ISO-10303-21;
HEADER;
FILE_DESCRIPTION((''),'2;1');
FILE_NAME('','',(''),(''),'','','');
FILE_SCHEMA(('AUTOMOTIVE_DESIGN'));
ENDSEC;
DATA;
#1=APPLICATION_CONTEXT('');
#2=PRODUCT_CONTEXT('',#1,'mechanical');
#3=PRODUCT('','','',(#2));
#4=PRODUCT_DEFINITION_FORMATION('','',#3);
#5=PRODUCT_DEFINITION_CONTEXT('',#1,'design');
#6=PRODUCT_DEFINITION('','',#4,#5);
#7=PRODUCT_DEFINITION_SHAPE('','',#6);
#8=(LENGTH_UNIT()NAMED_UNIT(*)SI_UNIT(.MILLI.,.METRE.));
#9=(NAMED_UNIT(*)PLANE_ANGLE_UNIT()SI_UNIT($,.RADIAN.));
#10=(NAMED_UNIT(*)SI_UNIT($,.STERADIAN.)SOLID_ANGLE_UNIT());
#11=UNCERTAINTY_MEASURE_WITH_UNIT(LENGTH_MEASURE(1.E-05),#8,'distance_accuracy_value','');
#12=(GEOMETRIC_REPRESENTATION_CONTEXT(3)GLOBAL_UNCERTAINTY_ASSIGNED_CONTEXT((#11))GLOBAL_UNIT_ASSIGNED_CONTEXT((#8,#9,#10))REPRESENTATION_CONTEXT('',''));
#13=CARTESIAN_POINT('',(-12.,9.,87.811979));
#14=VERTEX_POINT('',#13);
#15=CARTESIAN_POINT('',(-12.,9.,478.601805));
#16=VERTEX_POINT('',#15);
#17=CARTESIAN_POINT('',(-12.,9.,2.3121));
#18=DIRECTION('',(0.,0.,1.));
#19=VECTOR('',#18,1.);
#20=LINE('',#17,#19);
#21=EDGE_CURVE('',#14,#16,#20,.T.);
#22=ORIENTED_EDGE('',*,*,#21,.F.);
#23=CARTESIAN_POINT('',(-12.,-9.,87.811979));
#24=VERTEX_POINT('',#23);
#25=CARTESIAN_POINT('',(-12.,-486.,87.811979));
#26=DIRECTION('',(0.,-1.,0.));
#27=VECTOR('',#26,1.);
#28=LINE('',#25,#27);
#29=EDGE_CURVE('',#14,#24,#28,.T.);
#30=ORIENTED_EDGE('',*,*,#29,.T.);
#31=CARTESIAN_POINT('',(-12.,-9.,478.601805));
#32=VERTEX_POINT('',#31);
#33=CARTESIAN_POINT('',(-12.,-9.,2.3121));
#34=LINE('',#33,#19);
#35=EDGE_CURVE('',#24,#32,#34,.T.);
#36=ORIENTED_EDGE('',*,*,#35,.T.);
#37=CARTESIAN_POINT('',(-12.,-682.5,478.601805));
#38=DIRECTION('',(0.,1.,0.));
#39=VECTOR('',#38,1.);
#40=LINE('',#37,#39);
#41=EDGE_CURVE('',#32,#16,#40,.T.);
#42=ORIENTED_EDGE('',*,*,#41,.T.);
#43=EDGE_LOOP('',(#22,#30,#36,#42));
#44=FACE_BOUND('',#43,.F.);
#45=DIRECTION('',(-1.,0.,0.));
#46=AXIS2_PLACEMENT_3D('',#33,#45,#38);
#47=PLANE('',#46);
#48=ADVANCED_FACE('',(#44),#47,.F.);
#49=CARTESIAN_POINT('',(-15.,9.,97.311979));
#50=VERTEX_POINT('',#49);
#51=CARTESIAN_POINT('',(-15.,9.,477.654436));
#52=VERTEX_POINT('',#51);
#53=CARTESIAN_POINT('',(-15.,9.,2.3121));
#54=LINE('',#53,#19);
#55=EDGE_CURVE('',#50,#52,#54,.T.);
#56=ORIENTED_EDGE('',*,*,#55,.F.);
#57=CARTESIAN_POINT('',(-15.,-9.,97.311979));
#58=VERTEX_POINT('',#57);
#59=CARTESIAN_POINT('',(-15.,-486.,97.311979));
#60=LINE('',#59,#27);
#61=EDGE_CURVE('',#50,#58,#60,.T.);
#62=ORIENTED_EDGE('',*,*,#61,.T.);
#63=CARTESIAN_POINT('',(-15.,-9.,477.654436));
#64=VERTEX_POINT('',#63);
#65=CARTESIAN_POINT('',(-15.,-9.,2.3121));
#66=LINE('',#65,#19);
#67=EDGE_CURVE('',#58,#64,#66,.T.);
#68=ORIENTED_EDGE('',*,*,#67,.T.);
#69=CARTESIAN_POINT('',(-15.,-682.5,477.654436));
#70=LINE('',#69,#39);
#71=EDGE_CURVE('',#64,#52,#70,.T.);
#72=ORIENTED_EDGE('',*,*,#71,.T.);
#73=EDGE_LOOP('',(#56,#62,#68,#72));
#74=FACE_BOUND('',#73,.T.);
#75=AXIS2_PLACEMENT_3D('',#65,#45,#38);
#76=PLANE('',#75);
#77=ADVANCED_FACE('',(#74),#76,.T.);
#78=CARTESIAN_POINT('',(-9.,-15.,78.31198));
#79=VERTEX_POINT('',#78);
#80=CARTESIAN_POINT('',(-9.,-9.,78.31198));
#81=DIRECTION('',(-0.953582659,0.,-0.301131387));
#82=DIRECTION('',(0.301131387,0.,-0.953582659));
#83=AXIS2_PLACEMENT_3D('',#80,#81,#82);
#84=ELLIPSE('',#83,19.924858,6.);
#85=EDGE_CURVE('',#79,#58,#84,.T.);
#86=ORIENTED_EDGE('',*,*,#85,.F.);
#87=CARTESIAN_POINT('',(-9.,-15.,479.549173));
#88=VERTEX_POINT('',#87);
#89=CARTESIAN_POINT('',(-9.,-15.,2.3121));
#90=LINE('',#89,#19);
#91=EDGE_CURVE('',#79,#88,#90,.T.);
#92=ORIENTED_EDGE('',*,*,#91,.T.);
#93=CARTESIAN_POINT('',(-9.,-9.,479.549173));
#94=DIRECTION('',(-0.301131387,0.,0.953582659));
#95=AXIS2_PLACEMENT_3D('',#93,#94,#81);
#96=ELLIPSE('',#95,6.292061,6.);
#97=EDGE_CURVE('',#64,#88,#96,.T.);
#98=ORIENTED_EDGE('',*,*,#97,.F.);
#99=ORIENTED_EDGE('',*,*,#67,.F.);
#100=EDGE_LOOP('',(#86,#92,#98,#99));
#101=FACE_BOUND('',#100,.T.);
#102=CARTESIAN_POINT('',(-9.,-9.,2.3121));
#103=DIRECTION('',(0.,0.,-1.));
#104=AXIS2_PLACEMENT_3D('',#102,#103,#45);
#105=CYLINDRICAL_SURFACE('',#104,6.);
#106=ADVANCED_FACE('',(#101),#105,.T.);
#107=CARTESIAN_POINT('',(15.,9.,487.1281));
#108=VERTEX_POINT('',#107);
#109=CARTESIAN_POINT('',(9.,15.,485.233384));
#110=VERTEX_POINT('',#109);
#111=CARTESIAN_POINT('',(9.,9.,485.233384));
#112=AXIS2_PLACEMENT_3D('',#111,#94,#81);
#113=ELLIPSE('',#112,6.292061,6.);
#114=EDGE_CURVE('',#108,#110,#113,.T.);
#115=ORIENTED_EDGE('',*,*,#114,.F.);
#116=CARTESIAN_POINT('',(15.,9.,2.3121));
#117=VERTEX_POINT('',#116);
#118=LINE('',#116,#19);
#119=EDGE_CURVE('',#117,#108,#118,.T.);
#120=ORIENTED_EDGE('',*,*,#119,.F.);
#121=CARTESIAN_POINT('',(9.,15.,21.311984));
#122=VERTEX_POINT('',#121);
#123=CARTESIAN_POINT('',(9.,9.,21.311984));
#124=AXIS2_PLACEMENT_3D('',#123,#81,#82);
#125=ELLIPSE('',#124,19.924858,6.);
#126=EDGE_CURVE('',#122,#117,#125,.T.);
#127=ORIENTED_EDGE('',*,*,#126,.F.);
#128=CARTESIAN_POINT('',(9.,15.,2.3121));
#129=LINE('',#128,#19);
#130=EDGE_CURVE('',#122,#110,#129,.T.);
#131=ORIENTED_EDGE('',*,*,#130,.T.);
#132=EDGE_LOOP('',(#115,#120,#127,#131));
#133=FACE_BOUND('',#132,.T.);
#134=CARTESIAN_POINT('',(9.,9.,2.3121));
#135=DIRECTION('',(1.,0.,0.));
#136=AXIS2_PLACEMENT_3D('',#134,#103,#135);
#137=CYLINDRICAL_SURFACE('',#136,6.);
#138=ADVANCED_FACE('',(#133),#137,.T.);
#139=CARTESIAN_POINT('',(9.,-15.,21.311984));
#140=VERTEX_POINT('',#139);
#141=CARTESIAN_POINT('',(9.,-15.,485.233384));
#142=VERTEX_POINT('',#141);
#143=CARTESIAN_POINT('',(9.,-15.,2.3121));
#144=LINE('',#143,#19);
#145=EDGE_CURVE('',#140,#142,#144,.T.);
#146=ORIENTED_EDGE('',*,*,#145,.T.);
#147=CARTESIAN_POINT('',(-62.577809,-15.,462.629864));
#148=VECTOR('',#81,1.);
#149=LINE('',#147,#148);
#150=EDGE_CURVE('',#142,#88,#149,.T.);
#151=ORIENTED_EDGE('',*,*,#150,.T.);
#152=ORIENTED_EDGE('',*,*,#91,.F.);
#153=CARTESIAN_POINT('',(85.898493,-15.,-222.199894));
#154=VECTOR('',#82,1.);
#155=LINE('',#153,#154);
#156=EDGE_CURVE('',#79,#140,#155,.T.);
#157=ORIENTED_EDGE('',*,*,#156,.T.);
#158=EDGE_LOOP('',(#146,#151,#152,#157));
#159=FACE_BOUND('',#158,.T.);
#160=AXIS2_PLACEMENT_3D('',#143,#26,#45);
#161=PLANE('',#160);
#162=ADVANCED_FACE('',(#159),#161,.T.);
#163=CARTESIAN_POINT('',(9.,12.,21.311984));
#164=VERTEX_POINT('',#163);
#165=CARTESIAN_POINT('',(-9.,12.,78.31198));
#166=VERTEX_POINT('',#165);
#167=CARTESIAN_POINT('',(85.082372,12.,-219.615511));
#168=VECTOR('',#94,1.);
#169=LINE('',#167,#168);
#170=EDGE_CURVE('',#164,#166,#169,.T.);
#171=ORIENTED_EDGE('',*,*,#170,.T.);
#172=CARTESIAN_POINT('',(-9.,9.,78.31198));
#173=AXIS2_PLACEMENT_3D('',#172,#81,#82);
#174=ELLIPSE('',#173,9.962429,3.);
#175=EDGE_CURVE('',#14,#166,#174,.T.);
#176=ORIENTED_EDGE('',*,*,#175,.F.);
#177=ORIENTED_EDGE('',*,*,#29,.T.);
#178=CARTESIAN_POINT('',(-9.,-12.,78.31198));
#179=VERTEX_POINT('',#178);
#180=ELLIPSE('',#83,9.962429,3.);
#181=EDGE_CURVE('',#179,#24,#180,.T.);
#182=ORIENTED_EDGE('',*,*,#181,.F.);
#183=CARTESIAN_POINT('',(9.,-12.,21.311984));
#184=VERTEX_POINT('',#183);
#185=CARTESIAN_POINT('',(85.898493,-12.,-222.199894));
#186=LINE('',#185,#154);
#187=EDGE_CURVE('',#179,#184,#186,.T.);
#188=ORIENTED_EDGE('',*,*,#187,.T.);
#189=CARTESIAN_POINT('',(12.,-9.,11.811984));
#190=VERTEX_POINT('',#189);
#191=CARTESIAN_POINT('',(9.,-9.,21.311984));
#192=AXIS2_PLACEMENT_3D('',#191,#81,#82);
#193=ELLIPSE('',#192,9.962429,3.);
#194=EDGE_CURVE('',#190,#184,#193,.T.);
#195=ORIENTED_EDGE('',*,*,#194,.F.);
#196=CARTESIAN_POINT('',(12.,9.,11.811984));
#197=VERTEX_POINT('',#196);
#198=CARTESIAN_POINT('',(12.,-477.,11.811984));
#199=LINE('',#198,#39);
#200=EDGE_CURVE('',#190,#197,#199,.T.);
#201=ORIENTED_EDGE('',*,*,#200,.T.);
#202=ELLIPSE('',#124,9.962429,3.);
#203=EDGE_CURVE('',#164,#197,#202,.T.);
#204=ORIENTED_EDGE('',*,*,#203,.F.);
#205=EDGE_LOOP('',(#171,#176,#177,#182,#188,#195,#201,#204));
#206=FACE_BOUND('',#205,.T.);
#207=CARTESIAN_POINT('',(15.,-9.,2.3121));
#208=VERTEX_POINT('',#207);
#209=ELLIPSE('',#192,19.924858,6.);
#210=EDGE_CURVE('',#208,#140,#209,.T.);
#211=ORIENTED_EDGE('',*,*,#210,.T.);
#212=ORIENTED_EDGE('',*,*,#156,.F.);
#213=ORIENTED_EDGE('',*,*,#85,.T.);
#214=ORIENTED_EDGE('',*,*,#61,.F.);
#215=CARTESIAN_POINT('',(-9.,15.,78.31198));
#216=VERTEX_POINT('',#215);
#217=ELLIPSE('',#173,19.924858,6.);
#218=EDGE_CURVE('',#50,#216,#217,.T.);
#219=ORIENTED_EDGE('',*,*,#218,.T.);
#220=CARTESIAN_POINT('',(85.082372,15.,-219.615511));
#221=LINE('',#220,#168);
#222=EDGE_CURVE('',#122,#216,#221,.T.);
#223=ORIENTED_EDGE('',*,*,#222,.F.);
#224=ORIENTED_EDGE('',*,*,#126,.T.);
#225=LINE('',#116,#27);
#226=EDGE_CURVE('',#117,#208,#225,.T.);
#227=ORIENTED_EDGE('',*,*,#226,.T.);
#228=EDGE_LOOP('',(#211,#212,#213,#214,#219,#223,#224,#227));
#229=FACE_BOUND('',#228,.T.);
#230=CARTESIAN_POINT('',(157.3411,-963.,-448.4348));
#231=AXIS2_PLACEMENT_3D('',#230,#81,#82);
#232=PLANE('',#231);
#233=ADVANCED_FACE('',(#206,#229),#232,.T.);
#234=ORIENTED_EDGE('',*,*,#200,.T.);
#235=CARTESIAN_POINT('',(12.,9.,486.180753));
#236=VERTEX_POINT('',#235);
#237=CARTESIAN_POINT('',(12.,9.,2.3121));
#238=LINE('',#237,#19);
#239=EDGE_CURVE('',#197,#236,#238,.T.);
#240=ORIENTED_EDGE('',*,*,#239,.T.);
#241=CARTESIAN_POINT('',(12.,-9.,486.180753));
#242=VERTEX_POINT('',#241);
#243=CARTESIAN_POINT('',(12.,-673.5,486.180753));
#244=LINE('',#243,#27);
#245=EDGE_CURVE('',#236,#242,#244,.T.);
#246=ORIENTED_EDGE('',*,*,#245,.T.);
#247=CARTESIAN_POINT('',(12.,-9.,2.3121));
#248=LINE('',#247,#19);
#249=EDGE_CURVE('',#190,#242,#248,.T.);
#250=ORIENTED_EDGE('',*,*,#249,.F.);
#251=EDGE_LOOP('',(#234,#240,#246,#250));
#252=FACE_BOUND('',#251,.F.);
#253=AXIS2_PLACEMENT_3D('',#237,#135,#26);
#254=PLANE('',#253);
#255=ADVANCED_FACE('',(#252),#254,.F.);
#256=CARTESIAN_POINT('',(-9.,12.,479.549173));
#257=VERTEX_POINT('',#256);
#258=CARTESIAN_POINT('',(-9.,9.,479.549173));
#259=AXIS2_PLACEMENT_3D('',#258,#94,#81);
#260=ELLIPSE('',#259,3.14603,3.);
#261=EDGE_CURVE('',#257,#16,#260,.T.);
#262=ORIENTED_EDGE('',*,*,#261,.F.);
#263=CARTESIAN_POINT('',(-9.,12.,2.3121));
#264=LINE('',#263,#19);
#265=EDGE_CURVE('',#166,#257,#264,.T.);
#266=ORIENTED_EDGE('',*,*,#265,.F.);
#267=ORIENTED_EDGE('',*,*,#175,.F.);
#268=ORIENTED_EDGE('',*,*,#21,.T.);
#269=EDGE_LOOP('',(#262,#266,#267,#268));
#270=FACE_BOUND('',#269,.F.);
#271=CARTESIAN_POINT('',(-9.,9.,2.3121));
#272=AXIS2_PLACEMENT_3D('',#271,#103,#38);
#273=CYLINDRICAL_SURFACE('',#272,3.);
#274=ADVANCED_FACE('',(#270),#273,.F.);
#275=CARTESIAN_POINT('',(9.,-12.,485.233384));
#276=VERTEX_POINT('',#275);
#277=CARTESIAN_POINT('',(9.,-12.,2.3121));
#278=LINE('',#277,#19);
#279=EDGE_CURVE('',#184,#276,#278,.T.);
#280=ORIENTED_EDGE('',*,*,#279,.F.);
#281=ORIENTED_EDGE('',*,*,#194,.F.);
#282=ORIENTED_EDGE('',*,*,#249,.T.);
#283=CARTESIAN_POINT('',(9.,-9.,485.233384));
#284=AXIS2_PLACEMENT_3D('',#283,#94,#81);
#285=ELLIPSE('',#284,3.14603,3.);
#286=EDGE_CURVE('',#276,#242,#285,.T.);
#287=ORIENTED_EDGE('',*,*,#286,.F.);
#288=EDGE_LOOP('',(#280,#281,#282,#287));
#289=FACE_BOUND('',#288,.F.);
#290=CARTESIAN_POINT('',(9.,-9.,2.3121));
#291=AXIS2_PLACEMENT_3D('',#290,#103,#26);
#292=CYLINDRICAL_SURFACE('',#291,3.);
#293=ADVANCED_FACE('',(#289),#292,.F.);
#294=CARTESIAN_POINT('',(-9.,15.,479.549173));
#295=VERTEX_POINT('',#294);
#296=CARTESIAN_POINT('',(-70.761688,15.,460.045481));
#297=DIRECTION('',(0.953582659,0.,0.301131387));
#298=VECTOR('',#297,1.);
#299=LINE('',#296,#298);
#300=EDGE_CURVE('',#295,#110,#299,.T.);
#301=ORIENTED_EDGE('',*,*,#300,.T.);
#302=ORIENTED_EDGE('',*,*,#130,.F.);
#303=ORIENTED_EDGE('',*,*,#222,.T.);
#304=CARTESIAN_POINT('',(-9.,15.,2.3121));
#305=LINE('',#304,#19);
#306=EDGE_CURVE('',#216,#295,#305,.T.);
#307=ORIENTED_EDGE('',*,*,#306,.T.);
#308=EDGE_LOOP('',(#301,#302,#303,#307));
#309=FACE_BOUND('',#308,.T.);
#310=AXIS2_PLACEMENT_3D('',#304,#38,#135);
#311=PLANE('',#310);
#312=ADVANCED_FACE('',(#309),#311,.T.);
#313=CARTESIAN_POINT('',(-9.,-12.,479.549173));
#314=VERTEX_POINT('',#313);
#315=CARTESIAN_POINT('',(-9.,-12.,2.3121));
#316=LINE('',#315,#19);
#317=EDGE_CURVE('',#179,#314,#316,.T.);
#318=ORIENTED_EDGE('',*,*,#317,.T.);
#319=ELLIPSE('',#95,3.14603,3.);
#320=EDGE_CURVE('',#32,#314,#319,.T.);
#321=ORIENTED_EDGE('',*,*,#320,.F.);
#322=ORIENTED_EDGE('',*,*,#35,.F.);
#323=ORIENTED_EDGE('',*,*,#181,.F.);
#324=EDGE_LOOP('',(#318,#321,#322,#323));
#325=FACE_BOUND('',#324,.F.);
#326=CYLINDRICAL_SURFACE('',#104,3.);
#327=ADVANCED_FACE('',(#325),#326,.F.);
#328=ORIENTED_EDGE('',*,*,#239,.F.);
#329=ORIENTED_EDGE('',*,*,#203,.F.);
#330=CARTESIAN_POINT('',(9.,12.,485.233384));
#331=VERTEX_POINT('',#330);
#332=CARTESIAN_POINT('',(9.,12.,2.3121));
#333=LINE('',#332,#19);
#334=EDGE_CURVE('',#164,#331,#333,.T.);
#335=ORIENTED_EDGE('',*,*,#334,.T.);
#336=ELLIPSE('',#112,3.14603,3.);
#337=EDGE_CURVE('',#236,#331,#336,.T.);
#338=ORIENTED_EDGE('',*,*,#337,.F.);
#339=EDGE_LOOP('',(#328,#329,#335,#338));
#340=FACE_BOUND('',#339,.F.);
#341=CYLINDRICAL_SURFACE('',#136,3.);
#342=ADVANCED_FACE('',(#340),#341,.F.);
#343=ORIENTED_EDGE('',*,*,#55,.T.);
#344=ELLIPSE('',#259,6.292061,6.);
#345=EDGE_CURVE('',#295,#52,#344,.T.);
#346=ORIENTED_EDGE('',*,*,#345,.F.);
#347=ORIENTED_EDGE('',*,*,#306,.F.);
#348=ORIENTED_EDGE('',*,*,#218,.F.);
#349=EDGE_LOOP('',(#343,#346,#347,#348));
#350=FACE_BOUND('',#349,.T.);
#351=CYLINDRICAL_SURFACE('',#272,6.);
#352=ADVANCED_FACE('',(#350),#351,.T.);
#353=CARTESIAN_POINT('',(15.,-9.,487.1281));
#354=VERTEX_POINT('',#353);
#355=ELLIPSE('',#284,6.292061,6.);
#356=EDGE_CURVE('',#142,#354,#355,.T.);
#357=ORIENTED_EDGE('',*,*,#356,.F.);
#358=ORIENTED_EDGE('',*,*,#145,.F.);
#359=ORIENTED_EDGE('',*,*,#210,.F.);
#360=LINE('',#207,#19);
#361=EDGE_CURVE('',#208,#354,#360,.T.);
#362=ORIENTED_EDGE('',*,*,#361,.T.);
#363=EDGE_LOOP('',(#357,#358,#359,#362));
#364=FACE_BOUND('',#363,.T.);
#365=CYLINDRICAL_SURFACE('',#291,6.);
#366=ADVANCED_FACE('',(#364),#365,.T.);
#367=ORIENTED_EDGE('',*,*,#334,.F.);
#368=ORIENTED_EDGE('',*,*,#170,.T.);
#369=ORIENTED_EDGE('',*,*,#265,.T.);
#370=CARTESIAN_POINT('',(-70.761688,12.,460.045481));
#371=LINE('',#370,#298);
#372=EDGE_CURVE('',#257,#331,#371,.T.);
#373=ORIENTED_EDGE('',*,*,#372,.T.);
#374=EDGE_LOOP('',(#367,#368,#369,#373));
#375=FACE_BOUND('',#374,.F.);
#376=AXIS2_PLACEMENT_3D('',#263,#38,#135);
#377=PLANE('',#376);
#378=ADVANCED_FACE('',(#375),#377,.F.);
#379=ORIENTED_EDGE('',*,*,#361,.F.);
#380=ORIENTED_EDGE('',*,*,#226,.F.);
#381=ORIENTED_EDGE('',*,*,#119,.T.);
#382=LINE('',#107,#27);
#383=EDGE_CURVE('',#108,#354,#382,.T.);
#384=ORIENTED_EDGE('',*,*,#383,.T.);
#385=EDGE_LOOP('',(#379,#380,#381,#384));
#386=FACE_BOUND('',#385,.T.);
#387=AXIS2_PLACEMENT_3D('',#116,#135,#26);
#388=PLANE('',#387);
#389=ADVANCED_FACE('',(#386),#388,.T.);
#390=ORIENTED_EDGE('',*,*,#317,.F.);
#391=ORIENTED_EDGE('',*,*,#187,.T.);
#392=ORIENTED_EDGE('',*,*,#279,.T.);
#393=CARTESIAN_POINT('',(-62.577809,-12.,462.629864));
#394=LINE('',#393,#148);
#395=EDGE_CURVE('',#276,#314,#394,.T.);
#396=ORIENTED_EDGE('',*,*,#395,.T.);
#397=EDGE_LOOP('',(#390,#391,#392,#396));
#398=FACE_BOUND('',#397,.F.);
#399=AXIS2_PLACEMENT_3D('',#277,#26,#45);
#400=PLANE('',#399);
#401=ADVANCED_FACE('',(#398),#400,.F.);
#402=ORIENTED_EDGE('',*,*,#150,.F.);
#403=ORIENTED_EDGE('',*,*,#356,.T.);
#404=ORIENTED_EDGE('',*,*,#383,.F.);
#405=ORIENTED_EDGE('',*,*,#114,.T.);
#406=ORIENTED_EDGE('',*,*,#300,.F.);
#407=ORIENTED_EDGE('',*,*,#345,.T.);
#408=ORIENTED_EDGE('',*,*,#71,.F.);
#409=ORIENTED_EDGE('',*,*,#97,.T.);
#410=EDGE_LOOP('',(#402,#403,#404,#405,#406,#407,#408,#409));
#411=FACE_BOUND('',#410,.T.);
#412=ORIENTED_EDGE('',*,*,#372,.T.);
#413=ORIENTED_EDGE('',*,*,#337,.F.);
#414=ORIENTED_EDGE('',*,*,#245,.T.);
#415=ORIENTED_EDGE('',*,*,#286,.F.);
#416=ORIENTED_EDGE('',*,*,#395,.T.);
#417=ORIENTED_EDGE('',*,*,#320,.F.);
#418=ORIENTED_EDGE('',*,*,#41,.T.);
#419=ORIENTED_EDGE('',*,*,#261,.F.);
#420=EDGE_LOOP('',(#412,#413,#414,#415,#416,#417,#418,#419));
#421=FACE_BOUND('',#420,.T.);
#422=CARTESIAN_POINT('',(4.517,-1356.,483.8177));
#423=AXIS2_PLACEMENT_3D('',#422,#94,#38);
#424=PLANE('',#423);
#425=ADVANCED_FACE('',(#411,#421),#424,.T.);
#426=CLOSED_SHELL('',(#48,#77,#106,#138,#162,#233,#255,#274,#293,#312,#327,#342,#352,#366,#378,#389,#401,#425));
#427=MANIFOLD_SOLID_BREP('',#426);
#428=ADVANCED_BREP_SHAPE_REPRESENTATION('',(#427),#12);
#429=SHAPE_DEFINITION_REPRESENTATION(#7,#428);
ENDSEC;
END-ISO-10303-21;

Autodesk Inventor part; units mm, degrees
ref_plane "Start Plane" through (0, 0, 2.3121) normal (0, 0, 1) x (1, 0, 0)
ref_plane "End Plane" through (0, 0, 487.1282) normal (0, 0, 1) x (1, 0, 0)
sketch "Sketch" plane through (0, 0, 0) normal (0, 0, 1) x (1, 0, 0)
  line L0 (-15, -9) -> (-15, 9)
  line L1 (-9, 15) -> (9, 15)
  line L2 (15, 9) -> (15, -9)
  line L3 (9, -15) -> (-9, -15)
  arc A0 (-15, -9) -> (-9, -15) centre (-9, -9) ccw
  arc A1 (-9, 15) -> (-15, 9) centre (-9, 9) ccw
  arc A2 (15, 9) -> (9, 15) centre (9, 9) ccw
  arc A3 (9, -15) -> (15, -9) centre (9, -9) ccw
  arc A4 (-9, 12) -> (-12, 9) centre (-9, 9) ccw
  line L4 (-9, 12) -> (9, 12)
  arc A5 (12, 9) -> (9, 12) centre (9, 9) ccw
  line L5 (12, 9) -> (12, -9)
  arc A6 (9, -12) -> (12, -9) centre (9, -9) ccw
  line L6 (9, -12) -> (-9, -12)
  arc A7 (-12, -9) -> (-9, -12) centre (-9, -9) ccw
  line L7 (-12, -9) -> (-12, 9)
  line L8 (0, 22.7397) -> (0, -22.7397) construction
  line L9 (-22.7397, 0) -> (22.7397, 0) construction
  dimension "d7" = 6
  dimension "d10" = 30
  dimension "d11" = 30
  dimension "d12" = 3
  dimension "d15" = 15
  dimension "d16" = 15
extrude "Body" add sketch "Sketch" along normal up to surface (484.816 mm away) from surface at 2.3121
sketch "Sketch3" plane through (0, 0, 0) normal (0, 0, 1) x (1, 0, 0)
  line L0 (0, 0) -> (10, 0)
ref_plane "Work Plane3" through (0, 0, 0) normal (0, -1, 0) x (1, 0, 0)
ref_plane "Work Plane4" through (4.517, -1356, 483.8177) normal (-0.3011314, 0, 0.9535827) x (0.9535827, 0, 0.3011314)
split "Split1" plane through (4.517, -1356, 483.8177) removes the side toward (-0.3011314, 0, 0.9535827)
ref_plane "Work Plane5" through (157.3411, -963, -448.4348) normal (-0.9535827, 0, -0.3011314) x (-0.3011314, 0, 0.9535827)
split "Split2" plane through (157.3411, -963, -448.4348) removes the side toward (-0.9535827, 0, -0.3011314)
sketch "Sketch4" plane through (0, 0, 0) normal (0, -1, 0) x (1, 0, 0)
  line L0 (-2, 2.3121) -> (12, 2.3121) projected
  line L1 (-2, 487.1282) -> (12, 487.1282) projected
  dimension "d18" = 484.816
equation "\"d7\" = G_IR"
equation "\"d10\" = G_H"
equation "\"d11\" = G_W"
equation "\"d12\" = G_T"
equation "\"d15\" = 0.5 * d10"
equation "\"d16\" = 0.5 * d11"
equation "\"d3\" = G_L"
equation "\"G_W\" = 30"
equation "\"G_H\" = 30"
equation "\"G_T\" = 3"
equation "\"G_IR\" = 6"
equation "\"G_L\" = d18"
equation "\"G_OFFSET_START\" = -2.31215"
equation "\"G_OFFSET_END\" = -10.99331"
equation "\"d13\" = -G_OFFSET_START"
equation "\"d14\" = G_OFFSET_END + B_L"
equation "\"B_L\" = 498.12147"
properties part number "DIN EN 10219-2 - 30 x 30 x 3  - 484.82" material "Steel, Mild"
